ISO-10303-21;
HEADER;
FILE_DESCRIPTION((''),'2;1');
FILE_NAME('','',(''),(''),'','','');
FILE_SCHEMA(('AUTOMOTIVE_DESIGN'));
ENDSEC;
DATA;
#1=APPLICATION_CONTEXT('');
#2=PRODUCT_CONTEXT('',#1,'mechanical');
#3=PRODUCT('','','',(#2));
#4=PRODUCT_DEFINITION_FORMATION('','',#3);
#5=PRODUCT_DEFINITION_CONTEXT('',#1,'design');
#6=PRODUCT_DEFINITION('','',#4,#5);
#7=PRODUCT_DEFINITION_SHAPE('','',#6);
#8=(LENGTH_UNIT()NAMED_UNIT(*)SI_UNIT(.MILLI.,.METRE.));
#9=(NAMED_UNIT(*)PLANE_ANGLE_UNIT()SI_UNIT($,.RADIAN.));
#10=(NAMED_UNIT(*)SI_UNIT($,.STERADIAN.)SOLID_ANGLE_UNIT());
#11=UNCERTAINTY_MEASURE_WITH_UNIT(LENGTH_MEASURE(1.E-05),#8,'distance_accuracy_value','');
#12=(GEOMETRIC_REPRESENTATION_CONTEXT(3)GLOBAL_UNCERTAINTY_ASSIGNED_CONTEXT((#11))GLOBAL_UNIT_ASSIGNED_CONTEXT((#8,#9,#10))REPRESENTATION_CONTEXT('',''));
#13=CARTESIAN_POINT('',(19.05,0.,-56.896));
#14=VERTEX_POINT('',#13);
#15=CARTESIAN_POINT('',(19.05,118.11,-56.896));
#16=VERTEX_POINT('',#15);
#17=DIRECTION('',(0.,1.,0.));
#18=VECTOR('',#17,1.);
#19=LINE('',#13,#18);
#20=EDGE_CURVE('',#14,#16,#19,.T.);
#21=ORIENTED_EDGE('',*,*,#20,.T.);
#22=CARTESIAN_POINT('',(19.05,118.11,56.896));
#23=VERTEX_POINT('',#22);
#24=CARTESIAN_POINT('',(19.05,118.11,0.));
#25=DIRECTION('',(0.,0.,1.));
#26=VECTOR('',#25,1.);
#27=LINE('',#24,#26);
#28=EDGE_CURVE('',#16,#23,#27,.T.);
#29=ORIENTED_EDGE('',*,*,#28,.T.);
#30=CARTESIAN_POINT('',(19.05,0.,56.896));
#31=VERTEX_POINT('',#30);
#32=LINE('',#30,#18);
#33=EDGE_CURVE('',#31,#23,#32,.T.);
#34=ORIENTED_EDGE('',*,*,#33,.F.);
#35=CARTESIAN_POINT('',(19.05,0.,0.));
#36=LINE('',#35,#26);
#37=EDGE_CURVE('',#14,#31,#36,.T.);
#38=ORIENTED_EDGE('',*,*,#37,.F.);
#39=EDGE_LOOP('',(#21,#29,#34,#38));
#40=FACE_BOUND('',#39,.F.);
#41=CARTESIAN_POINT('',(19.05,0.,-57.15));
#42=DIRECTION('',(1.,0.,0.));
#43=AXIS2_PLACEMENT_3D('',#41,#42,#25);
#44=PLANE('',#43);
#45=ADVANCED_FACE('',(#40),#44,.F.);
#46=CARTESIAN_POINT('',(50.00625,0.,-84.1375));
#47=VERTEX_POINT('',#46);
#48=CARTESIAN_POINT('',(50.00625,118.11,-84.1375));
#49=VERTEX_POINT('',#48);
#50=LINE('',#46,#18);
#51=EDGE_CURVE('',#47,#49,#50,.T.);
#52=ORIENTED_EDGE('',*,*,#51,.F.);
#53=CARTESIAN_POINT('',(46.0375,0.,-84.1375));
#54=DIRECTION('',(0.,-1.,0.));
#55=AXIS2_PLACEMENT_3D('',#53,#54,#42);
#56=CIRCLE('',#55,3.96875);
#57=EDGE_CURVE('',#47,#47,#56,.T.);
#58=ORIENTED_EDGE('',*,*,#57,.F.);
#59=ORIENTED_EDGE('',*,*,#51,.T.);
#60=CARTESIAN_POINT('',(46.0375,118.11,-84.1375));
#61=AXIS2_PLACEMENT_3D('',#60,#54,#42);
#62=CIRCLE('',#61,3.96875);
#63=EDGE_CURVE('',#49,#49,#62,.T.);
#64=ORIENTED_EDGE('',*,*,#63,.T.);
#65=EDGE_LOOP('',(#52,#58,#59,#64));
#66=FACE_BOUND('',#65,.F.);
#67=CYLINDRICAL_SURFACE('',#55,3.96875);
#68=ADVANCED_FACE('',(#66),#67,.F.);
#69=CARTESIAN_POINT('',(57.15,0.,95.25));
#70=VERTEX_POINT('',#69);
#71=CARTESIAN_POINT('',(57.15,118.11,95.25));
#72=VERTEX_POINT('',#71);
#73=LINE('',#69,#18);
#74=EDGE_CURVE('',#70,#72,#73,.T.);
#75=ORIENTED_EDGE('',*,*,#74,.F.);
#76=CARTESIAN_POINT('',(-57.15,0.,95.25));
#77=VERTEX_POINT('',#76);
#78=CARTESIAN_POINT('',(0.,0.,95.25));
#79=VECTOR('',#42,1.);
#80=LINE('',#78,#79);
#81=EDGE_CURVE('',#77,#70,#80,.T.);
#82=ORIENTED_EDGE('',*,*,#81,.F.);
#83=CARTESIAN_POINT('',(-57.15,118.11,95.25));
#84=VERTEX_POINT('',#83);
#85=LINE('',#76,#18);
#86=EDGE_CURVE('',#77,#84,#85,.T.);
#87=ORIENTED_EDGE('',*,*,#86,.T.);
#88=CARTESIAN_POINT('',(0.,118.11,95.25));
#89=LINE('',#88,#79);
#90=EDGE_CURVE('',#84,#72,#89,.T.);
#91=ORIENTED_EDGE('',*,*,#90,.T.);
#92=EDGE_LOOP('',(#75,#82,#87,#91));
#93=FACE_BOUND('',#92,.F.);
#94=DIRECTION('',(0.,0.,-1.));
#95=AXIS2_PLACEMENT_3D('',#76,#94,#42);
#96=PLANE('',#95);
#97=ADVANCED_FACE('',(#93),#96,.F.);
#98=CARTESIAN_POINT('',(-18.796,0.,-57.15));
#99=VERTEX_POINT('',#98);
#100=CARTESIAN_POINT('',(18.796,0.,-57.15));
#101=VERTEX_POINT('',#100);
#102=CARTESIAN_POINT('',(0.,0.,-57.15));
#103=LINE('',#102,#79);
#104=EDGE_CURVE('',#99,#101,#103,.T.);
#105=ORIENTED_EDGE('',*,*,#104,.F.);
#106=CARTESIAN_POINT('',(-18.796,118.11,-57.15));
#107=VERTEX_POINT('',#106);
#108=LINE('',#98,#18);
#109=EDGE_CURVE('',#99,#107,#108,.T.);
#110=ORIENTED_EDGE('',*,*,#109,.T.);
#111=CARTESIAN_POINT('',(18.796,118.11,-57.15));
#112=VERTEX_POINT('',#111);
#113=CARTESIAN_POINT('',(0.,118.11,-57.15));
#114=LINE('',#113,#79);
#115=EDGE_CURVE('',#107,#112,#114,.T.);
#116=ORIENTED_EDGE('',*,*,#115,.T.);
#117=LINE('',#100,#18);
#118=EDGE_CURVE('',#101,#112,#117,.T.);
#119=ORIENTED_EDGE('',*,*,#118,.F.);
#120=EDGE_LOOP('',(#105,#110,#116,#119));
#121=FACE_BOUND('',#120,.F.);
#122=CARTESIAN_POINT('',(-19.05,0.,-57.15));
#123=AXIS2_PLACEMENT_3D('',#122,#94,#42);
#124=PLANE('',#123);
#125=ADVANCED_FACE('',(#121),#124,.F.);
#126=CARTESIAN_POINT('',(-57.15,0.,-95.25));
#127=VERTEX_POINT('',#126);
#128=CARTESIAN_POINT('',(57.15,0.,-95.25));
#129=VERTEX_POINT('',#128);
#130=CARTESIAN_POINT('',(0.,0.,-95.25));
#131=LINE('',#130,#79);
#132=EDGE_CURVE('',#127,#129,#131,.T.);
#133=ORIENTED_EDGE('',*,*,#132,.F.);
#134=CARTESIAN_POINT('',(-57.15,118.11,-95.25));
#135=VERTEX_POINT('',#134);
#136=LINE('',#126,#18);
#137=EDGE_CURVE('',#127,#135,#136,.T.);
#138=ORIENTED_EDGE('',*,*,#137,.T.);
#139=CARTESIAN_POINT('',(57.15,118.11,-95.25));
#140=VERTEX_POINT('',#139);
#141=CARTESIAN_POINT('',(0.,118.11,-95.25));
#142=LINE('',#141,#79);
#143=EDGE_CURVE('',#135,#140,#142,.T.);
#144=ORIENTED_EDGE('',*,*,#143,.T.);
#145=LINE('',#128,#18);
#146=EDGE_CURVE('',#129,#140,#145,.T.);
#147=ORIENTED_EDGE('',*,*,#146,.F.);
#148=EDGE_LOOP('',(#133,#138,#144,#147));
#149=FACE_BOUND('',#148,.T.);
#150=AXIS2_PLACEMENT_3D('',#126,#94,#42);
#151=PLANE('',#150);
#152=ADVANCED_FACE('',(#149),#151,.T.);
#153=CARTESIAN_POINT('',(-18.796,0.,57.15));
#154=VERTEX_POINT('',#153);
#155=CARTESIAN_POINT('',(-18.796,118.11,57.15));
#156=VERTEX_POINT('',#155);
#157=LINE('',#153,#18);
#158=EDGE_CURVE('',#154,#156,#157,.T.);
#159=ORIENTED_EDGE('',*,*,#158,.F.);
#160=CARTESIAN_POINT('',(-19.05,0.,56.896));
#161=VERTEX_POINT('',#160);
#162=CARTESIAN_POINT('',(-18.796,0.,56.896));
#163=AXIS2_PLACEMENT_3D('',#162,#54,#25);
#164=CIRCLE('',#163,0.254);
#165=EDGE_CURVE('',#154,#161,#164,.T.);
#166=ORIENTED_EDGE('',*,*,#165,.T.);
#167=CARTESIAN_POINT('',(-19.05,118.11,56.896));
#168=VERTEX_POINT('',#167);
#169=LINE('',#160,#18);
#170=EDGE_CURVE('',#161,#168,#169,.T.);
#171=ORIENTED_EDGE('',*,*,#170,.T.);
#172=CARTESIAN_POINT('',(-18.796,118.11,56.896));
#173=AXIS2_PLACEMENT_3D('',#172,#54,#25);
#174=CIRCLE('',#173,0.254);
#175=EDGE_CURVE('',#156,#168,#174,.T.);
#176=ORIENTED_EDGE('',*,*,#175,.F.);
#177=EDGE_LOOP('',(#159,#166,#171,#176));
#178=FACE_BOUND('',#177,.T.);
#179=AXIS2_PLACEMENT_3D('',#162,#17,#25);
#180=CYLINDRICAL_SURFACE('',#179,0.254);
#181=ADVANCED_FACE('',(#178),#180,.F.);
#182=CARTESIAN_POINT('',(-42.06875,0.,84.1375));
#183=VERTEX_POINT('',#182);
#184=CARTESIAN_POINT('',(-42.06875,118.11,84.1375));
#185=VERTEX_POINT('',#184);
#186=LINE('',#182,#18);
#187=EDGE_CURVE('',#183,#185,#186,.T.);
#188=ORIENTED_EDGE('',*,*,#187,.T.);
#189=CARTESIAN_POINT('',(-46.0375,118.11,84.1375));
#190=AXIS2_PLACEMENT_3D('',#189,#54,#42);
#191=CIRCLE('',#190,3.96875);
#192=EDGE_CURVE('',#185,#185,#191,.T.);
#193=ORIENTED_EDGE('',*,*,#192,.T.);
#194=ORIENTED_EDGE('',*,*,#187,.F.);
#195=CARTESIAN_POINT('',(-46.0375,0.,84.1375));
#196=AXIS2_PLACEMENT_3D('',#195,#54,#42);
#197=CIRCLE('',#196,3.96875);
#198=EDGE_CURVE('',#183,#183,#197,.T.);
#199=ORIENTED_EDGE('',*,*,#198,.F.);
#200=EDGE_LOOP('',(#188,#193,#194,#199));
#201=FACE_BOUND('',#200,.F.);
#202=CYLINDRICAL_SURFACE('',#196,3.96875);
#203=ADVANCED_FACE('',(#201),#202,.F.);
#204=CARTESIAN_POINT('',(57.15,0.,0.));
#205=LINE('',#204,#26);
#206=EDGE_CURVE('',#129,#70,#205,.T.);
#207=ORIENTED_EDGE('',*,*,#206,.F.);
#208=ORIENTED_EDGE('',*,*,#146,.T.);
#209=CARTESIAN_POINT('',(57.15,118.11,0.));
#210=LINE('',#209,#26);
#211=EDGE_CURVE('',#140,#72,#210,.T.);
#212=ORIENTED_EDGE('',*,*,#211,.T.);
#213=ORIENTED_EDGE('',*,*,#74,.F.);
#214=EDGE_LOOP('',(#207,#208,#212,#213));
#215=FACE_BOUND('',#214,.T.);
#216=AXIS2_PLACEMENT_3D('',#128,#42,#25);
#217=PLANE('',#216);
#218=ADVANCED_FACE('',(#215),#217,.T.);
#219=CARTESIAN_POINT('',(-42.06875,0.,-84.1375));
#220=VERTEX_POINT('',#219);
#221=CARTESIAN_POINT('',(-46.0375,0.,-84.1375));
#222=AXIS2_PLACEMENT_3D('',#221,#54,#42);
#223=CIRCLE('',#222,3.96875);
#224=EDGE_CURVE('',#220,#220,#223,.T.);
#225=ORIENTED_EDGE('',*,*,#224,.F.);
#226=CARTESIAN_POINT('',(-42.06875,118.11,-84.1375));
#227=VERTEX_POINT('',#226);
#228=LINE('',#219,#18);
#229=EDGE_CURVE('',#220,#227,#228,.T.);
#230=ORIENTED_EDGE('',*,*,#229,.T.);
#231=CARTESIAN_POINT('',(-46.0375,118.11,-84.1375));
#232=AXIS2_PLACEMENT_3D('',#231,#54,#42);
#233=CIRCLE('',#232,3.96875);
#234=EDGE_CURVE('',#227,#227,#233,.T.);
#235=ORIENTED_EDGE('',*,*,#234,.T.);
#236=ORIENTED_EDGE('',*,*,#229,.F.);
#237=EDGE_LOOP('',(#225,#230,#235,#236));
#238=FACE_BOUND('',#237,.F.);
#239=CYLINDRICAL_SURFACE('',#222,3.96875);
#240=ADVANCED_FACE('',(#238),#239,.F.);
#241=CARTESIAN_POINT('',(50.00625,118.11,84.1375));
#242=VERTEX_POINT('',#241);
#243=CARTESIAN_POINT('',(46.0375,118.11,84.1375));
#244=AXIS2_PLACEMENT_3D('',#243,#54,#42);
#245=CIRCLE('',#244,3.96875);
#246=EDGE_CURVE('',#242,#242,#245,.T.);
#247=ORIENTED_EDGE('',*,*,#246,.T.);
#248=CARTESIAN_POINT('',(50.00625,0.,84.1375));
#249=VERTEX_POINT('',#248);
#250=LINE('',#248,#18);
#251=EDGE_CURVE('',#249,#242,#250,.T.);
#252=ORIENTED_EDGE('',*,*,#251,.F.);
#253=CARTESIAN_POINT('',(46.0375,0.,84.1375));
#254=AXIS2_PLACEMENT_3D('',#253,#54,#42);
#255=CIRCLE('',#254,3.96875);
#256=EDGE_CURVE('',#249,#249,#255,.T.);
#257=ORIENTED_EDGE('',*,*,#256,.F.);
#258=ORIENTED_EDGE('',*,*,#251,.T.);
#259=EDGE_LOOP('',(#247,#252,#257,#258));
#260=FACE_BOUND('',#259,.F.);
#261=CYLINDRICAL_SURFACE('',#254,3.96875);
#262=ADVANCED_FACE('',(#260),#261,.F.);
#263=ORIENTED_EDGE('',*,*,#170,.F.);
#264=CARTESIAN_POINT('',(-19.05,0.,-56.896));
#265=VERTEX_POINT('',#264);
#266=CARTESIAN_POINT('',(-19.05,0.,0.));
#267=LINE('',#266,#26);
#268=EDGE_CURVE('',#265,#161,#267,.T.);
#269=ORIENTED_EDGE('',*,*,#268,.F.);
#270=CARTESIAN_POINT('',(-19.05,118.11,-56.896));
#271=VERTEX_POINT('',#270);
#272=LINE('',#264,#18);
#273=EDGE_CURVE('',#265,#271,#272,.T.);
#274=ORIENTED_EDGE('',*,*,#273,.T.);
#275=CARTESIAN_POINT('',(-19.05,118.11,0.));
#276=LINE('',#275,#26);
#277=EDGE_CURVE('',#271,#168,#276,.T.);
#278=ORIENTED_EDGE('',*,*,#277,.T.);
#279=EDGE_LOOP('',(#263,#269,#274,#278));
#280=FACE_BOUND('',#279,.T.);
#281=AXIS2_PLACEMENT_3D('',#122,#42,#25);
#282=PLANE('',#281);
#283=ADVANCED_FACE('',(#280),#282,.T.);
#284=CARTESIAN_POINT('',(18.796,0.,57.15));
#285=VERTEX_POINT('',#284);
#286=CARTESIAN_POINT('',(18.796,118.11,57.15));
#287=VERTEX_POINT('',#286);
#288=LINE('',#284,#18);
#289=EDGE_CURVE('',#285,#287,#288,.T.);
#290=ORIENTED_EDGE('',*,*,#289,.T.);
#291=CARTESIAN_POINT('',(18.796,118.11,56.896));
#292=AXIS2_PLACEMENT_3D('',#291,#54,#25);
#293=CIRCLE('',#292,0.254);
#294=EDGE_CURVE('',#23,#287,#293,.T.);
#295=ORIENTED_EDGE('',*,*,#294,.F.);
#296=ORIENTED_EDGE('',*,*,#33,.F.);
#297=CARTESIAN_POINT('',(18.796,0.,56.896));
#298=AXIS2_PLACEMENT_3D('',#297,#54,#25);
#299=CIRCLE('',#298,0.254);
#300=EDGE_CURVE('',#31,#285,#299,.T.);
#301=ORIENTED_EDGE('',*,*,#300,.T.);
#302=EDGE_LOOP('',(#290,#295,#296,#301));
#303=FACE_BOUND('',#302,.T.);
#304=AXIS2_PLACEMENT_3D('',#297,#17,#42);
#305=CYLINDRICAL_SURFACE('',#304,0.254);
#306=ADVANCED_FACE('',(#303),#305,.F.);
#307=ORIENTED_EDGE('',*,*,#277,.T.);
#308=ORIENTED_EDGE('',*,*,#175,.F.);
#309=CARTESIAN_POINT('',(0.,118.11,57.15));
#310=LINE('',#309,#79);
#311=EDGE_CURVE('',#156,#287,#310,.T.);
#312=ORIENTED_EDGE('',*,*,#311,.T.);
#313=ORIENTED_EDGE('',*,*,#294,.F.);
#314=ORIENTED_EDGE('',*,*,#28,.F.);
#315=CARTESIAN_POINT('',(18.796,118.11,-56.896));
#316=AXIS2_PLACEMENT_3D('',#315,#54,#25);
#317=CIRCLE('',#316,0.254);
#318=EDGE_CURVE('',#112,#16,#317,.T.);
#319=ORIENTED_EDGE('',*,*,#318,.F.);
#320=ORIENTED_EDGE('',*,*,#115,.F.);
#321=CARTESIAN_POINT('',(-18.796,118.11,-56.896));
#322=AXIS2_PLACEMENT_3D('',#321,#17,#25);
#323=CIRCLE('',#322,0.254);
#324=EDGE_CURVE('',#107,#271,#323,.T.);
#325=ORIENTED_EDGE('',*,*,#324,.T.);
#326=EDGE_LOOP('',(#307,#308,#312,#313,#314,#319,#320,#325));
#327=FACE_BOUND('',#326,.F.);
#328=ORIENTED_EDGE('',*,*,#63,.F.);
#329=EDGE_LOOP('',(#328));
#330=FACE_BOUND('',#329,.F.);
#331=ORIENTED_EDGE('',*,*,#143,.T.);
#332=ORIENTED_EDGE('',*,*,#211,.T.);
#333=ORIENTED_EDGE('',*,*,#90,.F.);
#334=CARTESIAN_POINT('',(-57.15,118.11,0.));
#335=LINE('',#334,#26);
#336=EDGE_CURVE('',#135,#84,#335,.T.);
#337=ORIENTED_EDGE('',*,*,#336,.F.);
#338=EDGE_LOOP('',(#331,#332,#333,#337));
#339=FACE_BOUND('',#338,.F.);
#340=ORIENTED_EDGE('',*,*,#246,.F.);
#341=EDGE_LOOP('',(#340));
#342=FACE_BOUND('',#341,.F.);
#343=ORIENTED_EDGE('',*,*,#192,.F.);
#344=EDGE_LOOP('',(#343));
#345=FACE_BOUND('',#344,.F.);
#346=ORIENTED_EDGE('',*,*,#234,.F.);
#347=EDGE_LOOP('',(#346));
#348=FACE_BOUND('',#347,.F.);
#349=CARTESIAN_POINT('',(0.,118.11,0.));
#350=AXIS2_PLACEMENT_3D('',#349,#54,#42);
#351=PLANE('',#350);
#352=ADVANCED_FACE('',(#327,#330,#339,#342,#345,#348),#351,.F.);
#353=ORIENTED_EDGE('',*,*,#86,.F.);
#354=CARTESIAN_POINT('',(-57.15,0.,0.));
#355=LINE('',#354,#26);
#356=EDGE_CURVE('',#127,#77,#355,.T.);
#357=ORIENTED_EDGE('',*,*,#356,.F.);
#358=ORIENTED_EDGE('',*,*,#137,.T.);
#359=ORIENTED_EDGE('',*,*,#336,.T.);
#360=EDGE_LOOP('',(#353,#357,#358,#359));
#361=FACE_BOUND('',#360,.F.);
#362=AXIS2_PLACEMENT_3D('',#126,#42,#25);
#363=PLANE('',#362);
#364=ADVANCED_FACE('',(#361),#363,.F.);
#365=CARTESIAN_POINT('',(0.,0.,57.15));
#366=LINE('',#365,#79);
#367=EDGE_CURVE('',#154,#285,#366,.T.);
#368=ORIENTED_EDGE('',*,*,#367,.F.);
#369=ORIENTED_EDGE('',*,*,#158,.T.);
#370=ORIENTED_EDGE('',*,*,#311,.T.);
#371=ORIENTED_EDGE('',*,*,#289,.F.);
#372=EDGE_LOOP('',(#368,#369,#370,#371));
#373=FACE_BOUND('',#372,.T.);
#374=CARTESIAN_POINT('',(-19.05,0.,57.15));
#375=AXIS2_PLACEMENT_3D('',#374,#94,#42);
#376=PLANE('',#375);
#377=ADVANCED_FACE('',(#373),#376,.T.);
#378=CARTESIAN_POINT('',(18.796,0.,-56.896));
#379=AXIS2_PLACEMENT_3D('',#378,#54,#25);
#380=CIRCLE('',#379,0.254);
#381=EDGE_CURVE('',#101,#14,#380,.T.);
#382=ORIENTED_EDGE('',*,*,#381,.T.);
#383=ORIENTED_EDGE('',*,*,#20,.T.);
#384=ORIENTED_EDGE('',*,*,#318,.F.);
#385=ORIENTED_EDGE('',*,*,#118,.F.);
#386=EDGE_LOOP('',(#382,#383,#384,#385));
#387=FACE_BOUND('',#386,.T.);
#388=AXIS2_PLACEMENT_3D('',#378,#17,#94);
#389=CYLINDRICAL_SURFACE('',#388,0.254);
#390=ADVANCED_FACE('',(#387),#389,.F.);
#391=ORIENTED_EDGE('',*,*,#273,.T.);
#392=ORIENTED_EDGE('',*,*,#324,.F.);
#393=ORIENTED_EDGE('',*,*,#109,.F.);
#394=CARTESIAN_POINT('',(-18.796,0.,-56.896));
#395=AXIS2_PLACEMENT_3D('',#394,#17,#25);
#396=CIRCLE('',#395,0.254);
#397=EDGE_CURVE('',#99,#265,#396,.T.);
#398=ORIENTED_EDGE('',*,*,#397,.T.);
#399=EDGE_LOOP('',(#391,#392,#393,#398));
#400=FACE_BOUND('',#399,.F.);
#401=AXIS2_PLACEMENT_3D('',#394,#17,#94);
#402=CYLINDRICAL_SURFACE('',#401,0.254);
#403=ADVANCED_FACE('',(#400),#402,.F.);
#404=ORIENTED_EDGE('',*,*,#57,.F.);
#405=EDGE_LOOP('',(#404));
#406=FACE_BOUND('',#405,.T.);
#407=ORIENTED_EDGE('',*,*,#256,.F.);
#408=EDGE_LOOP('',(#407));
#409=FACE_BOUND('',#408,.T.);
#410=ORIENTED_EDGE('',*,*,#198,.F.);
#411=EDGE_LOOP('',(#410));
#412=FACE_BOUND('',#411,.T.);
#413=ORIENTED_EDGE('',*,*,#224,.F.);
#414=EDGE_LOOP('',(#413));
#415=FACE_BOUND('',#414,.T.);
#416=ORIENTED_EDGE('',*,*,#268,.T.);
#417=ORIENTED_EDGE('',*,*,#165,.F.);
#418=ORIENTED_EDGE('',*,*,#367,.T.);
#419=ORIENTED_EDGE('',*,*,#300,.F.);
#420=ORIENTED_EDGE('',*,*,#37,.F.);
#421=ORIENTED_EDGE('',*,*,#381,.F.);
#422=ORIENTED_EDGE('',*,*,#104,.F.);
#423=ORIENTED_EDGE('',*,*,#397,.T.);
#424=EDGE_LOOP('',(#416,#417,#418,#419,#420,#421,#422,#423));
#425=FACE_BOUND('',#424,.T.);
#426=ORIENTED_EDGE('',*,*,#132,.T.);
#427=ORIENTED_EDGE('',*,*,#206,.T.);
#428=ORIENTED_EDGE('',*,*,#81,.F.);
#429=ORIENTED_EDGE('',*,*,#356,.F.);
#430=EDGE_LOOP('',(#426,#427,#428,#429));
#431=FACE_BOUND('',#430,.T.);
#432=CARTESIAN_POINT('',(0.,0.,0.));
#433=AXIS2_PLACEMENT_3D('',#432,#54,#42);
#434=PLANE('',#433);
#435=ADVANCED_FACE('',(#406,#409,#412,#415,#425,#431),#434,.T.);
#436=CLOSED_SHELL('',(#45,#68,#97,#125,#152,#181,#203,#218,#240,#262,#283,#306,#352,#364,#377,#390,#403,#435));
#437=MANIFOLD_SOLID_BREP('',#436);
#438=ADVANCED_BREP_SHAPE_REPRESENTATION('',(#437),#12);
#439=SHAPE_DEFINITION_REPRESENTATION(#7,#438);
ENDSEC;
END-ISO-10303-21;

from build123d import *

# Parameters (mm, degrees)
F1_W     = 114.3
F1_H     = 190.5
F2_DEPTH = 118.11
F3_R     = 3.96875
F4_DEPTH = 118.11
F5_W     = 38.1
F5_H     = 114.3
F6_DEPTH = 118.11
F7_R     = 0.254


with BuildPart() as f2:
    # F1 (on Front) → F2 (new body)
    with BuildSketch(Plane.XZ):
        Rectangle(F1_W, F1_H)
    extrude(amount=-F2_DEPTH)

    # F3 (on face) → F4 (cut)
    with BuildSketch(Plane.XZ):
        with Locations((-46.0375, 84.1375)):
            Circle(F3_R)
        with Locations((46.0375, 84.1375)):
            Circle(F3_R)
        with Locations((-46.0375, -84.1375)):
            Circle(F3_R)
        with Locations((46.0375, -84.1375)):
            Circle(F3_R)
    extrude(amount=-F4_DEPTH, mode=Mode.SUBTRACT)

    # F5 (on face) → F6 (cut)
    with BuildSketch(Plane.XZ):
        Rectangle(F5_W, F5_H)
    extrude(amount=-F6_DEPTH, mode=Mode.SUBTRACT)

    # F7
    f7_edges = [f2.edges().sort_by_distance(p)[0] for p in [
        (-19.05, 59.055, 57.15),
        (19.05, 59.055, 57.15),
        (19.05, 59.055, -57.15),
        (-19.05, 59.055, -57.15),
    ]]
    fillet(f7_edges, radius=F7_R)


solid = f2.part
